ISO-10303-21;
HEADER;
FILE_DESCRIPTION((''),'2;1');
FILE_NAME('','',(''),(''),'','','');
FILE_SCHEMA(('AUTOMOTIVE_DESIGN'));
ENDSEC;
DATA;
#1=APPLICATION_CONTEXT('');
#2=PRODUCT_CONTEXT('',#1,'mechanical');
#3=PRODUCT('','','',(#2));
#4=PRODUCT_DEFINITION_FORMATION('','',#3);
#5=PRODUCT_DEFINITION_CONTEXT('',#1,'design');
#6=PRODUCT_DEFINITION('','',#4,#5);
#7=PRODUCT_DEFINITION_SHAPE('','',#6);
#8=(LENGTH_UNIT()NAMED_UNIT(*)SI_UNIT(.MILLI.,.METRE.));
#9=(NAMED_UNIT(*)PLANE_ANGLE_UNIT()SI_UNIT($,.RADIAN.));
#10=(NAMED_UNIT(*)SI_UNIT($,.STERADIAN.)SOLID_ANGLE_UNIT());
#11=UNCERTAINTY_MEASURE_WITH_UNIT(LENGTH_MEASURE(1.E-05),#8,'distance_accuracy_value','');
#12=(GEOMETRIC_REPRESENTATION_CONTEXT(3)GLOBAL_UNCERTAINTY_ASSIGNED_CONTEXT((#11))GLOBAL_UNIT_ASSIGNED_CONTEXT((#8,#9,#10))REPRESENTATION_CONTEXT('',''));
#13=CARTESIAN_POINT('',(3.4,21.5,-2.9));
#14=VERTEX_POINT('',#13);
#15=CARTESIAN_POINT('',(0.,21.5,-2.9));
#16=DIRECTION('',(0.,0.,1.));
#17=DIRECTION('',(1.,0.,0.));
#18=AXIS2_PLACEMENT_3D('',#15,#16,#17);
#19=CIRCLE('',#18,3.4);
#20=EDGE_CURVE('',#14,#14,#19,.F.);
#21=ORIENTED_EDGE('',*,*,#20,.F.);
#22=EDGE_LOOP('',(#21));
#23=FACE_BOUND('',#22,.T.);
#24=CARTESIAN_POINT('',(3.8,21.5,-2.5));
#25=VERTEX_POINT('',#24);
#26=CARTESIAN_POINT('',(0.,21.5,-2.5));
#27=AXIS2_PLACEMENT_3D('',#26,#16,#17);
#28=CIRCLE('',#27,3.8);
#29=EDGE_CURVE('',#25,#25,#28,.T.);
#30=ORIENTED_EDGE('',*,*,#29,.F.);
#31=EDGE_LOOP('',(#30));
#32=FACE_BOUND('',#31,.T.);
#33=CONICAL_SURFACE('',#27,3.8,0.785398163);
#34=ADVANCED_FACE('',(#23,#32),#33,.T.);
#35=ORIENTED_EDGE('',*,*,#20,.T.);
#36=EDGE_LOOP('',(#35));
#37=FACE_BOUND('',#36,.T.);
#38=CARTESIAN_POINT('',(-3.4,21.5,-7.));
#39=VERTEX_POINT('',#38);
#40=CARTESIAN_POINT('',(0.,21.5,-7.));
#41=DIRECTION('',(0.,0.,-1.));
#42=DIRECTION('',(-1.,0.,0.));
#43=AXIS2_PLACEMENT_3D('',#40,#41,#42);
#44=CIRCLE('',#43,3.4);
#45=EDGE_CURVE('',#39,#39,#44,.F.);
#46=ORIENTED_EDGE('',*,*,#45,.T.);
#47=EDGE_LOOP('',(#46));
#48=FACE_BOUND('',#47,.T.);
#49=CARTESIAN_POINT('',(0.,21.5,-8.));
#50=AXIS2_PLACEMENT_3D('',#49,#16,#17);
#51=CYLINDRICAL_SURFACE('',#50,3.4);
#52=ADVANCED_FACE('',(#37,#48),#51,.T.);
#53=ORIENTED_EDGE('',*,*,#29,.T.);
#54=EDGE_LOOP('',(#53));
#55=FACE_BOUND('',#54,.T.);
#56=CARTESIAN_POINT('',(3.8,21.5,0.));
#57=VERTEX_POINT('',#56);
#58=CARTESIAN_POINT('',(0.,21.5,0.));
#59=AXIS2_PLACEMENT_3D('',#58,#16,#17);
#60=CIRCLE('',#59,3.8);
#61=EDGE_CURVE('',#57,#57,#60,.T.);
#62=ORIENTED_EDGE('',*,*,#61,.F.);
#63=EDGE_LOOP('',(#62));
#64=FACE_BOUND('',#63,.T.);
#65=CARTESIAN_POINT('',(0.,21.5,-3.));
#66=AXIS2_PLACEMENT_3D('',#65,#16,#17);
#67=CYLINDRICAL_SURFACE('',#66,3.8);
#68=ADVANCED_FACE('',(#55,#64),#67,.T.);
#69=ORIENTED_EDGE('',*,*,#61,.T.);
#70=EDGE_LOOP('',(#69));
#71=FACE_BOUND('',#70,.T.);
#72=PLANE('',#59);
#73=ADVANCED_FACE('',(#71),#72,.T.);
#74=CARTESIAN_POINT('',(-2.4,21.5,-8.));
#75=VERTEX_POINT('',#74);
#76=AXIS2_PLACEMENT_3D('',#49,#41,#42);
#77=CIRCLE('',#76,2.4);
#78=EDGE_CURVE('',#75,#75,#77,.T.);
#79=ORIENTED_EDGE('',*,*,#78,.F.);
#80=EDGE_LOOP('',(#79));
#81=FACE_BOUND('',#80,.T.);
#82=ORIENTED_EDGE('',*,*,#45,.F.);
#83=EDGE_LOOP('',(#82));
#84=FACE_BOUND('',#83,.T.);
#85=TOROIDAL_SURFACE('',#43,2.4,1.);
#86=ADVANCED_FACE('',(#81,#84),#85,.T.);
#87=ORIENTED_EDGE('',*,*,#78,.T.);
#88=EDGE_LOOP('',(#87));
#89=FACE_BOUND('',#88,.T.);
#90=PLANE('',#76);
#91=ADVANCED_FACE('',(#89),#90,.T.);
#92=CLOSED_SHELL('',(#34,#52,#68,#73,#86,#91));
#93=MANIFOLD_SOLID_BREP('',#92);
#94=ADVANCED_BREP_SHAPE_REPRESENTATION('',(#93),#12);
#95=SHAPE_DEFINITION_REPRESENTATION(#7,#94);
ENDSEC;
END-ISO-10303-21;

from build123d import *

# Parameters (mm, degrees)
SKETCH1_R           = 3.8
BOSS_EXTRUDE1_DEPTH = 3
SKETCH2_R           = 3.4
BOSS_EXTRUDE2_DEPTH = 5
FILLET1_R           = 1
CHAMFER1_SIZE       = 0.5


with BuildPart() as part:
    # Sketch1 → Boss-Extrude1 (new body)
    with BuildSketch(Plane.XY):
        with Locations((0, 21.5)):
            Circle(SKETCH1_R)
    extrude(amount=-BOSS_EXTRUDE1_DEPTH)

    # Sketch2 → Boss-Extrude2 (add)
    with BuildSketch(Plane(origin=(0, 0, -3), x_dir=(-1, 0, 0), z_dir=(0, 0, -1))):
        with Locations((0, 21.5)):
            Circle(SKETCH2_R)
    extrude(amount=BOSS_EXTRUDE2_DEPTH)

    # Fillet1
    fillet1_edges = [part.edges().sort_by_distance(p)[0] for p in [
        (3.4, 21.5, -8),
    ]]
    fillet(fillet1_edges, radius=FILLET1_R)

    # Chamfer1
    # the kernel refuses this chamfer: 0.5 mm, written as the material it takes off along each edge
    with BuildSketch(Plane(origin=(0, 21.5, -3), x_dir=(1, 0, 0), z_dir=(0, -1, 0))) as chamfer1_piece_1_section:
        Polygon((3.8 - CHAMFER1_SIZE, 0), (3.8, CHAMFER1_SIZE), (3.8, 0), align=None)
    chamfer1_piece_1 = revolve(axis=Axis((0, 21.5, -3), (0, 0, 1)), mode=Mode.PRIVATE)
    chamfer1_piece_1 = chamfer1_piece_1 - Plane(origin=(0, 21.5, -2.703116332), x_dir=(-1, 0, 0), z_dir=(0, 0, 1)) * Cylinder(3.4, 16, mode=Mode.PRIVATE)
    add(chamfer1_piece_1, mode=Mode.SUBTRACT)


solid = part.part
